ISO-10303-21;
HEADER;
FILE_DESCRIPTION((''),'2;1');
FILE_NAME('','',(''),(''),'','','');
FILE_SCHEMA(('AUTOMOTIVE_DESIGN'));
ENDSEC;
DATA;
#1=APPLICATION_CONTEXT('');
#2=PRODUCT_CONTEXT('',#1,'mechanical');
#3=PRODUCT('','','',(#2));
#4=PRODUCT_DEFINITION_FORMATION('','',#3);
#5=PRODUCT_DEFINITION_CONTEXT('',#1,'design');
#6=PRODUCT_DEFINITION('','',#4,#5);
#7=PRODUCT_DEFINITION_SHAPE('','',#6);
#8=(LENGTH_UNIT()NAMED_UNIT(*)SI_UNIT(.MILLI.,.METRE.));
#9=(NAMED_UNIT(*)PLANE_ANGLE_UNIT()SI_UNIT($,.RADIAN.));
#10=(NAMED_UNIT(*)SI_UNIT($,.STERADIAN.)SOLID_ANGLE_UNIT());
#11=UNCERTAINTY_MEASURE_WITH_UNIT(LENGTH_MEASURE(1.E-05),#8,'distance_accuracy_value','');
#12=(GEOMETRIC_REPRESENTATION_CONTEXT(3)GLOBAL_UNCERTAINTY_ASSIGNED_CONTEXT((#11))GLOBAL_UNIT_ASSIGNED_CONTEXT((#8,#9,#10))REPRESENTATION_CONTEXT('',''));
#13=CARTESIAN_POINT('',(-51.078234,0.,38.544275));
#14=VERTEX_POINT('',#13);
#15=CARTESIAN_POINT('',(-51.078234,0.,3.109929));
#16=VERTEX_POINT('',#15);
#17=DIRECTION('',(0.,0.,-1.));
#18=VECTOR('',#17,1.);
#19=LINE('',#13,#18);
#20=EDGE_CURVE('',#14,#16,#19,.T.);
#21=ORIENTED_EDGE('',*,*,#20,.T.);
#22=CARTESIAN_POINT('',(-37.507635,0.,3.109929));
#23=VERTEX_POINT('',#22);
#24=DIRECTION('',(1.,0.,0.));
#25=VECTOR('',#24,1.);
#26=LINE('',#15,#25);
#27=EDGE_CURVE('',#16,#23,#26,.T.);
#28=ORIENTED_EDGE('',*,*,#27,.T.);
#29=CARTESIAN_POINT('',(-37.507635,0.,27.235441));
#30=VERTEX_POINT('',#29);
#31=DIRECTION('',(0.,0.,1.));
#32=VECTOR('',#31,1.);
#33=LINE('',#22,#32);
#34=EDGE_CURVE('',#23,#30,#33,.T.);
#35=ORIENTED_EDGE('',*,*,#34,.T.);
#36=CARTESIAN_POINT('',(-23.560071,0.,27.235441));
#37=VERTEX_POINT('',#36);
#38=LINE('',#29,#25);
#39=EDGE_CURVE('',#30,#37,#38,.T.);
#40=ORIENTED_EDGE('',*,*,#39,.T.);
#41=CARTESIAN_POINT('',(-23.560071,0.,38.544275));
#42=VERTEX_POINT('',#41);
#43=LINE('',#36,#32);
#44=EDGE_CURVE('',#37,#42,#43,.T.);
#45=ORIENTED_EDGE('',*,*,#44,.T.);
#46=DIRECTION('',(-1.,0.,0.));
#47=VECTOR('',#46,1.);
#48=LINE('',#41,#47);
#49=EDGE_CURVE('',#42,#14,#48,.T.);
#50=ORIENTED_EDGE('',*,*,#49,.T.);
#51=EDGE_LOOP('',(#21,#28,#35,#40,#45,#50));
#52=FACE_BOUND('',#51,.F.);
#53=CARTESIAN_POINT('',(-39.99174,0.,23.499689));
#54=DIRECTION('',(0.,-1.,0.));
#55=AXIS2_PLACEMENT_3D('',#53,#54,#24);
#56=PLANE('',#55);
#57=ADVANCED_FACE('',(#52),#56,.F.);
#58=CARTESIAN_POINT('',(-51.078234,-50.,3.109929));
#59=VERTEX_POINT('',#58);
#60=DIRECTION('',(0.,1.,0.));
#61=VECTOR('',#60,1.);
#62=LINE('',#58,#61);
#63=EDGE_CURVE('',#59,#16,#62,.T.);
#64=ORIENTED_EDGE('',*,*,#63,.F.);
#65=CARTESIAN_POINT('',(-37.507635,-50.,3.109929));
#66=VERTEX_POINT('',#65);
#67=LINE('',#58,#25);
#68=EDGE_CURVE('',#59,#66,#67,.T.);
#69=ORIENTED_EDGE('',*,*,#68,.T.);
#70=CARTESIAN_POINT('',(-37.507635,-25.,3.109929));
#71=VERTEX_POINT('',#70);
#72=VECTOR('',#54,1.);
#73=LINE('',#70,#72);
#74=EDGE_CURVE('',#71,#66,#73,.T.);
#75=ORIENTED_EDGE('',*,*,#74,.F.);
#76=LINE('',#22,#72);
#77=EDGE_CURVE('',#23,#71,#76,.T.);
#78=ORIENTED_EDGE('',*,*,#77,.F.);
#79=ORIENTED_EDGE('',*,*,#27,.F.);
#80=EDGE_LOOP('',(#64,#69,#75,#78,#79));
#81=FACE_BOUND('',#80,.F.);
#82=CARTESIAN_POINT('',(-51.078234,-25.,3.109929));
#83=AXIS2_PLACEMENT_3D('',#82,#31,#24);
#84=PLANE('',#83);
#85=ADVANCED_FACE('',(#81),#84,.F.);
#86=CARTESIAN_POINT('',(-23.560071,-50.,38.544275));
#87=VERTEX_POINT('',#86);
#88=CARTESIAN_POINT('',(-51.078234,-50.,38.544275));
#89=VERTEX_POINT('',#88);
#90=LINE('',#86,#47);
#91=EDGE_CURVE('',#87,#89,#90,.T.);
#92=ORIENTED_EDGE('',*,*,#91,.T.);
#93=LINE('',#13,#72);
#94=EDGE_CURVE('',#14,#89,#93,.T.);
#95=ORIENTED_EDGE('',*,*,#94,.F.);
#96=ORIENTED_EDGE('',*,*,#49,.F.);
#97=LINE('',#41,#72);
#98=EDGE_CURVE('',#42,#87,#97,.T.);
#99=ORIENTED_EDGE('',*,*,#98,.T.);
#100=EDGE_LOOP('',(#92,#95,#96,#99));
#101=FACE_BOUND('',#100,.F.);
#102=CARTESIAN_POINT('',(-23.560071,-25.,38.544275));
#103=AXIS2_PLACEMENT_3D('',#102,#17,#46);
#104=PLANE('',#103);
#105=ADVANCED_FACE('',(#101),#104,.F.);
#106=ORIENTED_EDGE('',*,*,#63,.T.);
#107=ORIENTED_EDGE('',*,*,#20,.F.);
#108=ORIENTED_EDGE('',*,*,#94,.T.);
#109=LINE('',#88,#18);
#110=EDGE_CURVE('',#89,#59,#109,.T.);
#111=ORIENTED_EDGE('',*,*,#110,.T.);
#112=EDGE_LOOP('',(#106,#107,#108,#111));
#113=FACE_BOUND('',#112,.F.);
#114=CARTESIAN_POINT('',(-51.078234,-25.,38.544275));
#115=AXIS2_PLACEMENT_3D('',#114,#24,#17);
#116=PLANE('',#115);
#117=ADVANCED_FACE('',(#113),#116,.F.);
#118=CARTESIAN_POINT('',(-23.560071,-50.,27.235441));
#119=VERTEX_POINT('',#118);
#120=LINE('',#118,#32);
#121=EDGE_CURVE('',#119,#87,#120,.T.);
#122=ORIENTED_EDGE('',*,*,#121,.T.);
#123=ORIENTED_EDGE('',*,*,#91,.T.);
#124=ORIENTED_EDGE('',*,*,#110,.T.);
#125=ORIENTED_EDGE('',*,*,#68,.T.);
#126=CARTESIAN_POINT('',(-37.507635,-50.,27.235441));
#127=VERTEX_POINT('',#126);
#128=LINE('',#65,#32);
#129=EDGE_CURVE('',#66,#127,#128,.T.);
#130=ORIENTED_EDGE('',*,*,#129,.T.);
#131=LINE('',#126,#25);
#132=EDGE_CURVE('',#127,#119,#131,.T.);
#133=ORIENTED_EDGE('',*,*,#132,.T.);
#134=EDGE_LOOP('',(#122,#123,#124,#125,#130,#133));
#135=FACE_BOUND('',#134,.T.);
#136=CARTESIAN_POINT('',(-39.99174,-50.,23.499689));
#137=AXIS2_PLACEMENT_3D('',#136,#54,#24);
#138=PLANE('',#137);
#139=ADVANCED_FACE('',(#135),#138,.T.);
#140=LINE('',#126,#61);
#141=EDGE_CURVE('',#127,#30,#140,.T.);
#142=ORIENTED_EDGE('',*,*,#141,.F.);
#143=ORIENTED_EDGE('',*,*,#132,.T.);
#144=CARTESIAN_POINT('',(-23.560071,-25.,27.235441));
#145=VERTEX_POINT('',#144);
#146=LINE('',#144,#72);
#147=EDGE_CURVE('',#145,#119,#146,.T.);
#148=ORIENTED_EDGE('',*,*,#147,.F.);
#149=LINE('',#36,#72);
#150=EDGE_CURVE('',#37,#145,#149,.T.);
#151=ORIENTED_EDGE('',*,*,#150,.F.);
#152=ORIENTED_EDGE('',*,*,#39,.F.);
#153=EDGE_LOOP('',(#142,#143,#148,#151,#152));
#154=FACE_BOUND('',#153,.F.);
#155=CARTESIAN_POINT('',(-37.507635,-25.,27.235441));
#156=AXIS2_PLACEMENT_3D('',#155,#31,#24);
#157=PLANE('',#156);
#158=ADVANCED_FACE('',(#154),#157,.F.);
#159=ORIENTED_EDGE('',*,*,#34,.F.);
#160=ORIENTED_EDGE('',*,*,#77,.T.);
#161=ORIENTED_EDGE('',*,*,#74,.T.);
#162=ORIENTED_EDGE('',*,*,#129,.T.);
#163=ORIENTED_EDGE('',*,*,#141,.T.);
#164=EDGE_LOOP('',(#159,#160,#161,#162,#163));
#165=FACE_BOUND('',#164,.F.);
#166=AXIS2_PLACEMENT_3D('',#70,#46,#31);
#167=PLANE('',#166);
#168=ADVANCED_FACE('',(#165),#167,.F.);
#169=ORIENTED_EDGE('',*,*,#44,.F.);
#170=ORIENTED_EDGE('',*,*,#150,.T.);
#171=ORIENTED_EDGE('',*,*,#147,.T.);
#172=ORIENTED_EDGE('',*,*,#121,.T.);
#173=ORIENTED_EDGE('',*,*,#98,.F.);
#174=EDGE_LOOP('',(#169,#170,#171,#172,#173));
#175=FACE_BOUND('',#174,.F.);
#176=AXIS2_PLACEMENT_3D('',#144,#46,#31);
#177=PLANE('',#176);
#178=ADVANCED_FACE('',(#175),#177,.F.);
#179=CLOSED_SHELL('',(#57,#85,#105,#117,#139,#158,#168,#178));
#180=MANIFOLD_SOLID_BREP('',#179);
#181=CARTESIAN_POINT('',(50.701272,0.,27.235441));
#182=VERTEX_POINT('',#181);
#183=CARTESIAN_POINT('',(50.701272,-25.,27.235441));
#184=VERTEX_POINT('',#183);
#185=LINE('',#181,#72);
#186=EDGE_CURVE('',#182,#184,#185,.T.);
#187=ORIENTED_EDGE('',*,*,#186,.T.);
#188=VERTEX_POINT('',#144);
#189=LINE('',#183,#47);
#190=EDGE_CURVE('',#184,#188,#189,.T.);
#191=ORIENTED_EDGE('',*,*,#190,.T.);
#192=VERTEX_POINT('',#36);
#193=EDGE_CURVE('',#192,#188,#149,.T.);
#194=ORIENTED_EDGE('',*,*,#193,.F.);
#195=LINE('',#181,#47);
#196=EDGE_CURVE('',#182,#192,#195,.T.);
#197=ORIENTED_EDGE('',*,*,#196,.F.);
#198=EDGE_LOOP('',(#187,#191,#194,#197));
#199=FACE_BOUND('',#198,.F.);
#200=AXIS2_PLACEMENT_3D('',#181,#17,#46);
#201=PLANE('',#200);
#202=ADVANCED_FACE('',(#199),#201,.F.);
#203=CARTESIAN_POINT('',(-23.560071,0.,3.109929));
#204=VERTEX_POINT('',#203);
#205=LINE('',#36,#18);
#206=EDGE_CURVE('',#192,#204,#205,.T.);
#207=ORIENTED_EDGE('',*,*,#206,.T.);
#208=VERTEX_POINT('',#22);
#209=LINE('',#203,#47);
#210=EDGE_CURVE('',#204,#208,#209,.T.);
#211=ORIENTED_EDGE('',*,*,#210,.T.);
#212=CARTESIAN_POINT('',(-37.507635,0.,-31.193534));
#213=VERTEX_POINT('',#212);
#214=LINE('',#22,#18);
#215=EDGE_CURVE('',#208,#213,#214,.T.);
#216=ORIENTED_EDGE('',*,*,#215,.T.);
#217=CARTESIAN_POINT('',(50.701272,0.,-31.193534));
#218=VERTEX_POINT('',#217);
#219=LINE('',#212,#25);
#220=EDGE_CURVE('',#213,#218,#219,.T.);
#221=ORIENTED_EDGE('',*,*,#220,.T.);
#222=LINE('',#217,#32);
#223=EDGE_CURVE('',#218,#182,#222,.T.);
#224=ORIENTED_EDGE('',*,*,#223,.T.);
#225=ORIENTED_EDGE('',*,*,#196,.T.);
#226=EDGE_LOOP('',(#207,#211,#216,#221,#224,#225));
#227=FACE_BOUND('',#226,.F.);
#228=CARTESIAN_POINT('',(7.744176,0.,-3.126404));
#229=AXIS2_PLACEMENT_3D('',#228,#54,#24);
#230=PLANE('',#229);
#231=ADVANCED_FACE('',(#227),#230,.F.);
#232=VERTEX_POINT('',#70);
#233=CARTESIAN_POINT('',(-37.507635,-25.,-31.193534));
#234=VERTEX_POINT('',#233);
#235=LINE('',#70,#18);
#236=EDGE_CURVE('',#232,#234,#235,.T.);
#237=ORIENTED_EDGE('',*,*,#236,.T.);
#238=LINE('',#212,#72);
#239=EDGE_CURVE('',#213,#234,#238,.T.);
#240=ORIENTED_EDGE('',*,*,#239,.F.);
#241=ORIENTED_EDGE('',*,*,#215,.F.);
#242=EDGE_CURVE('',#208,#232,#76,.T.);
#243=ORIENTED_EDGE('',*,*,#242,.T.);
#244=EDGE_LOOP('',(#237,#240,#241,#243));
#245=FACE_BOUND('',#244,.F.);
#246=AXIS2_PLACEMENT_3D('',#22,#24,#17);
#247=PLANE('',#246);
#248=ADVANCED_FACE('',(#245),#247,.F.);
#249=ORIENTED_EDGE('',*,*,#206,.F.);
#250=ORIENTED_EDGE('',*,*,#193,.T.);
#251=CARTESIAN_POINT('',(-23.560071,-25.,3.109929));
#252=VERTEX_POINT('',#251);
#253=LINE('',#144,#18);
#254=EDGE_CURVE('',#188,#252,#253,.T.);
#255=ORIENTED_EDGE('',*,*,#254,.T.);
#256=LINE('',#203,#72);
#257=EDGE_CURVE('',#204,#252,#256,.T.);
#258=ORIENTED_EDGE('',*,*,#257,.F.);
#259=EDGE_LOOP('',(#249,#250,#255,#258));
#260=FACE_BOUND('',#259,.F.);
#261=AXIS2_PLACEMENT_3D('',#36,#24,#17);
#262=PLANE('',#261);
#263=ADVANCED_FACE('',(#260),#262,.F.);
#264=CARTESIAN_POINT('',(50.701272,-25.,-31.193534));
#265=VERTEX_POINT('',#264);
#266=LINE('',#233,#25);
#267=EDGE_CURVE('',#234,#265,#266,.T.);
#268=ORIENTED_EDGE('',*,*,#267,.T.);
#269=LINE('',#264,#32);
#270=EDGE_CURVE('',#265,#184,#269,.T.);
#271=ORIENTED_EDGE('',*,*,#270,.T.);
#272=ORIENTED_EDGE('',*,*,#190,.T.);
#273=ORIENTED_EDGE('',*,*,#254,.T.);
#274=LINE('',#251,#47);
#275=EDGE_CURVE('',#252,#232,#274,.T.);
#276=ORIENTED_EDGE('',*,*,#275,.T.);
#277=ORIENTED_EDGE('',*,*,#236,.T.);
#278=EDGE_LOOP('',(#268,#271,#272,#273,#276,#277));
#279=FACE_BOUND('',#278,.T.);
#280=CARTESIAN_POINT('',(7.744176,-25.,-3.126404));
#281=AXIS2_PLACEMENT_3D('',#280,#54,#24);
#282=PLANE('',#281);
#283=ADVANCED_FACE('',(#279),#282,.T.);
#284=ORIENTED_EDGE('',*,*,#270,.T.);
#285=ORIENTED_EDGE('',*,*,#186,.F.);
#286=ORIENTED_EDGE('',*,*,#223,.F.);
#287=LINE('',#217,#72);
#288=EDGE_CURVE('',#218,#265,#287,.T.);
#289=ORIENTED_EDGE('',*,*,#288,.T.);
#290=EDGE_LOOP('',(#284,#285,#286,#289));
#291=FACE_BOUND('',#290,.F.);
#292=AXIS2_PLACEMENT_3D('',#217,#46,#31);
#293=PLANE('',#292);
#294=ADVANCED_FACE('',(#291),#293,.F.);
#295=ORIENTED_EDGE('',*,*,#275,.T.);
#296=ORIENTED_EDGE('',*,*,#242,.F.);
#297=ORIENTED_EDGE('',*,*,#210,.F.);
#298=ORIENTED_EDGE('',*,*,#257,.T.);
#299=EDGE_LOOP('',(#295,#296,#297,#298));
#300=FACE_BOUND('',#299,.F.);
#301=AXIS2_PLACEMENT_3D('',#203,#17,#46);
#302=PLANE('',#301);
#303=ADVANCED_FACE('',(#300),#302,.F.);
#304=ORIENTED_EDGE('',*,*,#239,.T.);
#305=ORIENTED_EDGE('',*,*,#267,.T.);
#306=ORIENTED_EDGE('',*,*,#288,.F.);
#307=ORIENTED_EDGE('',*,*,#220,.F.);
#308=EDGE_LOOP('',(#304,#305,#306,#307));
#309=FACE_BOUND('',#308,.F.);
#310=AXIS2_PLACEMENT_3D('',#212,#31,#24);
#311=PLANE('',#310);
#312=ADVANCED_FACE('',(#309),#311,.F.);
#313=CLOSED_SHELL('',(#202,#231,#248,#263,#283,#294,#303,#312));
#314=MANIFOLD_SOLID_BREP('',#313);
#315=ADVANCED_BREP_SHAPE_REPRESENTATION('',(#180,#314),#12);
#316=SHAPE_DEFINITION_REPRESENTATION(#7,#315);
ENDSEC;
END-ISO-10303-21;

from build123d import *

# Parameters (mm, degrees)
F1_DEPTH = 25
F2_DEPTH = 25


with BuildPart() as f1:
    # F0 (on Front) → F1 (new body)
    with BuildSketch(Plane.XZ):
        Polygon((-37.5076346099, 27.2354409099), (-23.560071364, 27.2354409099), (-23.560071364, 38.5442748666), (-51.0782338679, 38.5442748666), (-51.0782338679, 3.1099293847), (-37.5076346099, 3.1099293847), align=None)
    extrude(amount=F1_DEPTH)

    # F2 (add): a face of the model
    f2_faces = [f1.faces().sort_by_distance(p)[0] for p in [
        (-40.8944956817, -25, 23.8065550076),
    ]]


with BuildPart() as f1b:
    # F0 (on Front) → F1, piece 2 (new body)
    with BuildSketch(Plane.XZ):
        Polygon((-12.6281967387, 27.2354409099), (-12.816679664, 27.2354409099), (-23.560071364, 27.2354409099), (-23.560071364, 3.1099293847), (-37.5076346099, 3.1099293847), (-37.5076346099, -31.1935339123), (50.7012717426, -31.1935339123), (50.7012717426, 27.2354409099), align=None)
    extrude(amount=F1_DEPTH)


with BuildPart() as f1_1:
    add(f1.part)

    add(f1b.part)  # F2 merges F1b
    extrude(f2_faces, amount=F2_DEPTH)


solid = f1_1.part
